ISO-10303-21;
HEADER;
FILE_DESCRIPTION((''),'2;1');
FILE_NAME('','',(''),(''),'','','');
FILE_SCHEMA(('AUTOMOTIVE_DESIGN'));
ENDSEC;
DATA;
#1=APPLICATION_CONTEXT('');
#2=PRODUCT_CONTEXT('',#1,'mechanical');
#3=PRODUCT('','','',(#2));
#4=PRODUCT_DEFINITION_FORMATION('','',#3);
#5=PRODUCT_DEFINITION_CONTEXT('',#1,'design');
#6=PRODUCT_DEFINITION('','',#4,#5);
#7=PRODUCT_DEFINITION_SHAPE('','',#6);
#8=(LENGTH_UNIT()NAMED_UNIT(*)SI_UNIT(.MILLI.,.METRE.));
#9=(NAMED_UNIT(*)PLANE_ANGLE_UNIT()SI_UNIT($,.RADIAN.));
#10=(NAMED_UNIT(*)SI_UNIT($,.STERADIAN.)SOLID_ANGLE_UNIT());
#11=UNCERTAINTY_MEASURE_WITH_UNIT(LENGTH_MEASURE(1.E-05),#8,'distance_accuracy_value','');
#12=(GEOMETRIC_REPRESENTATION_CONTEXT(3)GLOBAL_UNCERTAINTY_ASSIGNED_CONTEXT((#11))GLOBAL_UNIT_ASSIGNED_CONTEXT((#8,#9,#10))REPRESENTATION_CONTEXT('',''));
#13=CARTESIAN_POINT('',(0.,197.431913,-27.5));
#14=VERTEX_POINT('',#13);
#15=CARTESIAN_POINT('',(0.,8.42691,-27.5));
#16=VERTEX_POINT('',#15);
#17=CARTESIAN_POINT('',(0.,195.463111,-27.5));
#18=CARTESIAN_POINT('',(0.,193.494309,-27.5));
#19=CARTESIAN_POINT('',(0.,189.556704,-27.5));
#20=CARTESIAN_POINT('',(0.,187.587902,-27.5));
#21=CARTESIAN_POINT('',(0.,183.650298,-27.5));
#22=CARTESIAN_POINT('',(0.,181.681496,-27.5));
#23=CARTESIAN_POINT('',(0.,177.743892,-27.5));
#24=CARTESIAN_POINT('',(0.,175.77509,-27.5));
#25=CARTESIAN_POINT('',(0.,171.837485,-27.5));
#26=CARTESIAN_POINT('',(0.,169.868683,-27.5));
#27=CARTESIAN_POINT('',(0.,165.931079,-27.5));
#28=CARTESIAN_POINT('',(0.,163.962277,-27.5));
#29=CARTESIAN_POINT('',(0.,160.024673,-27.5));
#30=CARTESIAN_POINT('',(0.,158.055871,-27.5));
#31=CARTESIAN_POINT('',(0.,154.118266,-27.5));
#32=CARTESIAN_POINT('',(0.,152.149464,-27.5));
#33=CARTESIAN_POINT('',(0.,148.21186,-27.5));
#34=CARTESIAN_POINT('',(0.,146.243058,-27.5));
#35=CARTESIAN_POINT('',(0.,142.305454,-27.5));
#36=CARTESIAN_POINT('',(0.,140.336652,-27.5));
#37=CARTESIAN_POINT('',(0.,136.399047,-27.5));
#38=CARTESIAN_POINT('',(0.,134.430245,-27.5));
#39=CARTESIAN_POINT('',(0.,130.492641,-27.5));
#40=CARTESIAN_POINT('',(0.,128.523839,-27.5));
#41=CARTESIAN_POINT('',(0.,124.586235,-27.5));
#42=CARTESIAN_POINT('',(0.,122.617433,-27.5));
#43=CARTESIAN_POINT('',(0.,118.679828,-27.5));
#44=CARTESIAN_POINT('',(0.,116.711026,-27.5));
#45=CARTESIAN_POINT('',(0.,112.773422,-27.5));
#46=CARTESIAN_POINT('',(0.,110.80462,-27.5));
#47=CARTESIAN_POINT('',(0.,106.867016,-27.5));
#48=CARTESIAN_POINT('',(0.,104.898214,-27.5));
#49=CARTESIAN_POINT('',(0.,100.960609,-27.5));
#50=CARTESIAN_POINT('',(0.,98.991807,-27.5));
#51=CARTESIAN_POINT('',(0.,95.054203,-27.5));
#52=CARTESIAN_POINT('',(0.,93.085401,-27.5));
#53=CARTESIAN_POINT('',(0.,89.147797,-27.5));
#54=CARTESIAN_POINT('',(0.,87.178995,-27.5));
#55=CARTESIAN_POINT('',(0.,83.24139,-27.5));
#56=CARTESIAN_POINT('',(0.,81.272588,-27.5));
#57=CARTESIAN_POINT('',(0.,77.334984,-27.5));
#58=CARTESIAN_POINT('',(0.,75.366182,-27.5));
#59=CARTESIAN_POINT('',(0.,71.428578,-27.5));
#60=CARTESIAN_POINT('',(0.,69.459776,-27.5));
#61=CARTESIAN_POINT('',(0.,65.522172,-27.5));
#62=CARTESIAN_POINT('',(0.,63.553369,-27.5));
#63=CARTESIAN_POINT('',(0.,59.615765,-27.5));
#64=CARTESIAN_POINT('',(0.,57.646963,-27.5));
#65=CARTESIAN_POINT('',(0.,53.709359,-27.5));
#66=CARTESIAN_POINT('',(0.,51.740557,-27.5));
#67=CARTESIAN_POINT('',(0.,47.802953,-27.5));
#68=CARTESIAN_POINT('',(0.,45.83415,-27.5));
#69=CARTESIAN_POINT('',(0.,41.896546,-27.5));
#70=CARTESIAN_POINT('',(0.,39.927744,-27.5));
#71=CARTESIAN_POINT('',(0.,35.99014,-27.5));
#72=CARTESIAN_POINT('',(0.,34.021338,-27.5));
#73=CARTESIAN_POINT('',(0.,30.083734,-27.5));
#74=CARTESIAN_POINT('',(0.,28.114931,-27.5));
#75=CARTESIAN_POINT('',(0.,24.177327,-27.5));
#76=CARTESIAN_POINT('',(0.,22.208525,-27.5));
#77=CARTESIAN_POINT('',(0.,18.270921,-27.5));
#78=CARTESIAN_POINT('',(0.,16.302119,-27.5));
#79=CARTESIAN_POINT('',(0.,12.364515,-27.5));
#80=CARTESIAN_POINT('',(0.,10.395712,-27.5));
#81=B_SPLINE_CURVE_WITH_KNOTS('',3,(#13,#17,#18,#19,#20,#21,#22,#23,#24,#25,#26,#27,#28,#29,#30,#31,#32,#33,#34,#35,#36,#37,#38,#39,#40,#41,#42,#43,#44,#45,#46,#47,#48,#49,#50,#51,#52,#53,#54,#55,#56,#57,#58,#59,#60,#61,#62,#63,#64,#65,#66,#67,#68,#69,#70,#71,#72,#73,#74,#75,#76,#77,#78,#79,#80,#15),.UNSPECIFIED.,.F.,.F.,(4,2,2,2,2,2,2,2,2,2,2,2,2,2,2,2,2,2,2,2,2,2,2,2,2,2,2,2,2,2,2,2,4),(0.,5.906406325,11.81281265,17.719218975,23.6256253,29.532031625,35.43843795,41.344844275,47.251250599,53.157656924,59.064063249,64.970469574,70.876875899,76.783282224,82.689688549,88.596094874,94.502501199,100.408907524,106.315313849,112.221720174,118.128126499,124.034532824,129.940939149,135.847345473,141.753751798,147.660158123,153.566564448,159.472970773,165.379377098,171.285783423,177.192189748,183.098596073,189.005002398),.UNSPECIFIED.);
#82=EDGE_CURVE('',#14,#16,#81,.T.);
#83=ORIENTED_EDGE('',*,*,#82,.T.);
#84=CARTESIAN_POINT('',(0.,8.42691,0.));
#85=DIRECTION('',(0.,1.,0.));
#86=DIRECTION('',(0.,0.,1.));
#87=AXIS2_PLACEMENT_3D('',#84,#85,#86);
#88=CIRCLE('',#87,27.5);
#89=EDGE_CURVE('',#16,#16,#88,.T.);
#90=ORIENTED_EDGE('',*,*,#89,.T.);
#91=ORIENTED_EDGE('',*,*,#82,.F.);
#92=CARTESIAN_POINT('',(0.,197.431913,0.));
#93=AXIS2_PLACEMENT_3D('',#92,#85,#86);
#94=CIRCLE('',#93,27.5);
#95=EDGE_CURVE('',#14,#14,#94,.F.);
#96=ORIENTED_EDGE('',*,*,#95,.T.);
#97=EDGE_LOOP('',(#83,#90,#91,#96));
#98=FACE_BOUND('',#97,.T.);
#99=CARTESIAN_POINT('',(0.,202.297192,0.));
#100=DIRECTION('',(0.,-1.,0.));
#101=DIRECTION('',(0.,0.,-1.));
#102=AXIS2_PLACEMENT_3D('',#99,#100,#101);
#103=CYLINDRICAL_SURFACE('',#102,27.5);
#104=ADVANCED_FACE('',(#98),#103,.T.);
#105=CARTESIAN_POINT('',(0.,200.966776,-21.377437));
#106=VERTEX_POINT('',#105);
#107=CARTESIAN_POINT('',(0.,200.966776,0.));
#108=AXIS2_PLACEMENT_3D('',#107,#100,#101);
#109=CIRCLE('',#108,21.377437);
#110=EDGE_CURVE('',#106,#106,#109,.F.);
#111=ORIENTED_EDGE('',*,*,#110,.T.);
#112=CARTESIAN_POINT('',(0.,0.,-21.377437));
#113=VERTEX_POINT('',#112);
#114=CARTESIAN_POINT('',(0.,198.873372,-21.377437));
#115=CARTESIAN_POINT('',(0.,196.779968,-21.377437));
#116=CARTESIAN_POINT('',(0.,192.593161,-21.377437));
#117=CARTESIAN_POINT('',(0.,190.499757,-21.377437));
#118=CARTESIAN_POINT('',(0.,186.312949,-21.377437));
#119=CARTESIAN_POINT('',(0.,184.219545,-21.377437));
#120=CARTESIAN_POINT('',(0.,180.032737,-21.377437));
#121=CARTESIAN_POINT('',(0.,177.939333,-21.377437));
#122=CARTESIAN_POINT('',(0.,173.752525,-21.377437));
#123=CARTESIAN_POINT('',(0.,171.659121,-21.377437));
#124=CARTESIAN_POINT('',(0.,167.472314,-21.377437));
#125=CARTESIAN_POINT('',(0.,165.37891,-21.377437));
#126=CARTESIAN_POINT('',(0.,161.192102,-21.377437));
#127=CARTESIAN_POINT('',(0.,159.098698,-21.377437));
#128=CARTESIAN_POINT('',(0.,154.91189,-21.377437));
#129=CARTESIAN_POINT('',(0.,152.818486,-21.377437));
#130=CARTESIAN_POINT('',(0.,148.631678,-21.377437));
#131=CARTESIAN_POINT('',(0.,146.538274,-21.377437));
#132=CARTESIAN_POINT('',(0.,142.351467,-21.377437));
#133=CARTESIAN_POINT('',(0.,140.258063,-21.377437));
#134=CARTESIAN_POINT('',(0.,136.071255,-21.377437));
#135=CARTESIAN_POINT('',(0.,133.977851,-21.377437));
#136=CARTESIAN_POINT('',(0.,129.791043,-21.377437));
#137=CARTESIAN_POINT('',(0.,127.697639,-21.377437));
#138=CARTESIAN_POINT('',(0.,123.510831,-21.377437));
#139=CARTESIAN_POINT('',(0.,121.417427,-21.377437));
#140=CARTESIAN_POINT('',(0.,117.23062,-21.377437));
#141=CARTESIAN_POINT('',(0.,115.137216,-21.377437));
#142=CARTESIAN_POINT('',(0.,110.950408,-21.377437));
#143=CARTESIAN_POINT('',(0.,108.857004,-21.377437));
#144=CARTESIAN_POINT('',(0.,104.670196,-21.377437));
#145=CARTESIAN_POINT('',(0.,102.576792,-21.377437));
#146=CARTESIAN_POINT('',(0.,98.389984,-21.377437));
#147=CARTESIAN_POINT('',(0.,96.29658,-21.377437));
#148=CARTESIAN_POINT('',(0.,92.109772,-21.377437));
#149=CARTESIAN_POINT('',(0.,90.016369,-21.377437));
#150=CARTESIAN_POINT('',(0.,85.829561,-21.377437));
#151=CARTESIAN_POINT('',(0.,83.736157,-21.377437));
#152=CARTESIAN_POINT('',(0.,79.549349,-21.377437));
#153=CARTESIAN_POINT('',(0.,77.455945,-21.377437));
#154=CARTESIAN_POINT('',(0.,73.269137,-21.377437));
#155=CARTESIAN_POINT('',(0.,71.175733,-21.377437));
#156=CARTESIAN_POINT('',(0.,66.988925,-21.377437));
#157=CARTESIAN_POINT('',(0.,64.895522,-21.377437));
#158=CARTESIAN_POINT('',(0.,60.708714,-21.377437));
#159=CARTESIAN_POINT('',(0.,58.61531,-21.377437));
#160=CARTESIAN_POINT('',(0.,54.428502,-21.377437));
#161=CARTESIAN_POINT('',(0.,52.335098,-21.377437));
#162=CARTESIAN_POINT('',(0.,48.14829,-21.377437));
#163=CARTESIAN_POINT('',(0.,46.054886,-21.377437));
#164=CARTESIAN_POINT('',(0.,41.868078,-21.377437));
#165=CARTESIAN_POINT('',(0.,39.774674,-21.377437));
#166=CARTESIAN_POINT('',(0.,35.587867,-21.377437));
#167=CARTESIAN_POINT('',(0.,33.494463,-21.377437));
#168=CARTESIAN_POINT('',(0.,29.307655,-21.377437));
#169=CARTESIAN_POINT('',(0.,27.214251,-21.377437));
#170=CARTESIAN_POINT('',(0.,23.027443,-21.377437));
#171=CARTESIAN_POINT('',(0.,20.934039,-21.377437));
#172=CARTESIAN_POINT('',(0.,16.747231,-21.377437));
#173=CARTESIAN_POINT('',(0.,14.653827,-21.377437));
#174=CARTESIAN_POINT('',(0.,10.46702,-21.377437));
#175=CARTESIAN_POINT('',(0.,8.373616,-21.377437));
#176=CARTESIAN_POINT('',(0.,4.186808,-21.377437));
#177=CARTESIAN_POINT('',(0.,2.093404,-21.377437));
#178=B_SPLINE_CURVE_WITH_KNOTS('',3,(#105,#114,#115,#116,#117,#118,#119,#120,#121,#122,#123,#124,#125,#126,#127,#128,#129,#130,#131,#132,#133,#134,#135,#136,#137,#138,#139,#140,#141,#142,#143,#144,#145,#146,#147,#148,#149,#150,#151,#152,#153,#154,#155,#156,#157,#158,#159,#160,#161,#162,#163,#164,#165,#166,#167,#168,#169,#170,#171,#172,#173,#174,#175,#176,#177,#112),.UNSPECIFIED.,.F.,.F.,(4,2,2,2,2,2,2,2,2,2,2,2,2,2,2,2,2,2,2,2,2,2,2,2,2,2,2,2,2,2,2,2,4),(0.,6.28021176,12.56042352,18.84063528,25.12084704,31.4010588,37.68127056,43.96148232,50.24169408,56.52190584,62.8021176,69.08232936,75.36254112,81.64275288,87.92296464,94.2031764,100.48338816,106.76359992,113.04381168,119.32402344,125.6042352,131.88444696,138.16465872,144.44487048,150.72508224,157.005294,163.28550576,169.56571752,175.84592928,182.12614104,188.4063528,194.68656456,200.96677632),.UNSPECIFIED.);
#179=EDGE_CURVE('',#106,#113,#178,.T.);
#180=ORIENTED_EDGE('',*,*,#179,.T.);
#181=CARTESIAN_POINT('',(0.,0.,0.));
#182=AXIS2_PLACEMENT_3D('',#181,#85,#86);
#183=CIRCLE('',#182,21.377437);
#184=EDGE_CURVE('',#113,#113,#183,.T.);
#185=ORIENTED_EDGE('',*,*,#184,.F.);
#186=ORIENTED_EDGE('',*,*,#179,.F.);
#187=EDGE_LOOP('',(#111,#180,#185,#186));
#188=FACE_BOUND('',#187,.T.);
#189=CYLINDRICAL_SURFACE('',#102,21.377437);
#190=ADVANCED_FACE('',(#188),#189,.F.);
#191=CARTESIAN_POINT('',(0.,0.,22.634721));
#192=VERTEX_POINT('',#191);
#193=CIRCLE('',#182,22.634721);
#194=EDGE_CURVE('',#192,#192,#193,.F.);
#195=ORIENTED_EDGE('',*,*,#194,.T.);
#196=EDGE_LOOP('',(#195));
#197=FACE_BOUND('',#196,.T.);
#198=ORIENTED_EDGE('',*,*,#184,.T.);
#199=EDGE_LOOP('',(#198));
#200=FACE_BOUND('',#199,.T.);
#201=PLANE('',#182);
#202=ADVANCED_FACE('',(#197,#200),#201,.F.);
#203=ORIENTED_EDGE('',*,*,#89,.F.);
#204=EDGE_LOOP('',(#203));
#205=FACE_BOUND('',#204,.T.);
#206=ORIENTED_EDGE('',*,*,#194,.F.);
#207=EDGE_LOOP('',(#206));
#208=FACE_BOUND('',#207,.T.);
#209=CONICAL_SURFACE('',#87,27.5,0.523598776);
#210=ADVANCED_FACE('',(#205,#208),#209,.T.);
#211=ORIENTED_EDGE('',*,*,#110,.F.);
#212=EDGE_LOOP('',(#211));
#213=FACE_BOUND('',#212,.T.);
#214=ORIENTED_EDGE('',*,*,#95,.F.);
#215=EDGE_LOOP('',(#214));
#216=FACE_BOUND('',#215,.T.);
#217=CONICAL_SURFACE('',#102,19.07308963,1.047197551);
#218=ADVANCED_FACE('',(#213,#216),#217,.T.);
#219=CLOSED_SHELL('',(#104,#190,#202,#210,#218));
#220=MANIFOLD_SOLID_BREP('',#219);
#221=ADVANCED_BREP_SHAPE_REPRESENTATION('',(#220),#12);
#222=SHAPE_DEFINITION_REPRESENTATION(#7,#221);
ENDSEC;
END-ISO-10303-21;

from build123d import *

# Parameters (mm, degrees)
SKETCH1_R           = 27.5
BOSS_EXTRUDE1_DEPTH = 202.297192
SKETCH2_R           = 21.37743673
CUT_EXTRUDE1_DEPTH  = 207.001587108
CHAMFER1_SIZE       = 4.865279
CHAMFER1_SIZE_2     = 8.42691


with BuildPart() as part:
    # Sketch1 → Boss-Extrude1 (new body)
    with BuildSketch(Plane(origin=(0, 0, 0), x_dir=(1, 0, 0), z_dir=(0, 1, 0))):
        with Locations(Location((0, 0, 0), (0, 0, 90))):
            Circle(SKETCH1_R)
    extrude(amount=BOSS_EXTRUDE1_DEPTH)

    # Sketch2 → Cut-Extrude1 (cut, through all)
    with BuildSketch(Plane(origin=(0, 0, 0), x_dir=(1, 0, 0), z_dir=(0, 1, 0))):
        with Locations(Location((0, 0, 0), (0, 0, 90))):
            Circle(SKETCH2_R)
    extrude(amount=CUT_EXTRUDE1_DEPTH, mode=Mode.SUBTRACT)

    # Chamfer1
    # the kernel refuses this chamfer: 8.42691, 4.865279 mm, written as the material it takes off along each edge
    with BuildSketch(Plane(origin=(0, 202.297192, 0), x_dir=(0, 0, -1), z_dir=(1, 0, 0))) as chamfer1_piece_1:
        Polygon((27.5, -CHAMFER1_SIZE), (27.5 - CHAMFER1_SIZE_2, 0), (27.5, 0), align=None)
    revolve(axis=Axis((0, 202.297192, 0), (0, 1, 0)), mode=Mode.SUBTRACT)
    with BuildSketch(Plane(origin=(0, 0, 0), x_dir=(0, 0, -1), z_dir=(1, 0, 0))) as chamfer1_piece_2:
        Polygon((27.5, CHAMFER1_SIZE_2), (27.5 - CHAMFER1_SIZE, 0), (27.5, 0), align=None)
    revolve(axis=Axis((0, 0, 0), (0, 1, 0)), mode=Mode.SUBTRACT)


solid = part.part
